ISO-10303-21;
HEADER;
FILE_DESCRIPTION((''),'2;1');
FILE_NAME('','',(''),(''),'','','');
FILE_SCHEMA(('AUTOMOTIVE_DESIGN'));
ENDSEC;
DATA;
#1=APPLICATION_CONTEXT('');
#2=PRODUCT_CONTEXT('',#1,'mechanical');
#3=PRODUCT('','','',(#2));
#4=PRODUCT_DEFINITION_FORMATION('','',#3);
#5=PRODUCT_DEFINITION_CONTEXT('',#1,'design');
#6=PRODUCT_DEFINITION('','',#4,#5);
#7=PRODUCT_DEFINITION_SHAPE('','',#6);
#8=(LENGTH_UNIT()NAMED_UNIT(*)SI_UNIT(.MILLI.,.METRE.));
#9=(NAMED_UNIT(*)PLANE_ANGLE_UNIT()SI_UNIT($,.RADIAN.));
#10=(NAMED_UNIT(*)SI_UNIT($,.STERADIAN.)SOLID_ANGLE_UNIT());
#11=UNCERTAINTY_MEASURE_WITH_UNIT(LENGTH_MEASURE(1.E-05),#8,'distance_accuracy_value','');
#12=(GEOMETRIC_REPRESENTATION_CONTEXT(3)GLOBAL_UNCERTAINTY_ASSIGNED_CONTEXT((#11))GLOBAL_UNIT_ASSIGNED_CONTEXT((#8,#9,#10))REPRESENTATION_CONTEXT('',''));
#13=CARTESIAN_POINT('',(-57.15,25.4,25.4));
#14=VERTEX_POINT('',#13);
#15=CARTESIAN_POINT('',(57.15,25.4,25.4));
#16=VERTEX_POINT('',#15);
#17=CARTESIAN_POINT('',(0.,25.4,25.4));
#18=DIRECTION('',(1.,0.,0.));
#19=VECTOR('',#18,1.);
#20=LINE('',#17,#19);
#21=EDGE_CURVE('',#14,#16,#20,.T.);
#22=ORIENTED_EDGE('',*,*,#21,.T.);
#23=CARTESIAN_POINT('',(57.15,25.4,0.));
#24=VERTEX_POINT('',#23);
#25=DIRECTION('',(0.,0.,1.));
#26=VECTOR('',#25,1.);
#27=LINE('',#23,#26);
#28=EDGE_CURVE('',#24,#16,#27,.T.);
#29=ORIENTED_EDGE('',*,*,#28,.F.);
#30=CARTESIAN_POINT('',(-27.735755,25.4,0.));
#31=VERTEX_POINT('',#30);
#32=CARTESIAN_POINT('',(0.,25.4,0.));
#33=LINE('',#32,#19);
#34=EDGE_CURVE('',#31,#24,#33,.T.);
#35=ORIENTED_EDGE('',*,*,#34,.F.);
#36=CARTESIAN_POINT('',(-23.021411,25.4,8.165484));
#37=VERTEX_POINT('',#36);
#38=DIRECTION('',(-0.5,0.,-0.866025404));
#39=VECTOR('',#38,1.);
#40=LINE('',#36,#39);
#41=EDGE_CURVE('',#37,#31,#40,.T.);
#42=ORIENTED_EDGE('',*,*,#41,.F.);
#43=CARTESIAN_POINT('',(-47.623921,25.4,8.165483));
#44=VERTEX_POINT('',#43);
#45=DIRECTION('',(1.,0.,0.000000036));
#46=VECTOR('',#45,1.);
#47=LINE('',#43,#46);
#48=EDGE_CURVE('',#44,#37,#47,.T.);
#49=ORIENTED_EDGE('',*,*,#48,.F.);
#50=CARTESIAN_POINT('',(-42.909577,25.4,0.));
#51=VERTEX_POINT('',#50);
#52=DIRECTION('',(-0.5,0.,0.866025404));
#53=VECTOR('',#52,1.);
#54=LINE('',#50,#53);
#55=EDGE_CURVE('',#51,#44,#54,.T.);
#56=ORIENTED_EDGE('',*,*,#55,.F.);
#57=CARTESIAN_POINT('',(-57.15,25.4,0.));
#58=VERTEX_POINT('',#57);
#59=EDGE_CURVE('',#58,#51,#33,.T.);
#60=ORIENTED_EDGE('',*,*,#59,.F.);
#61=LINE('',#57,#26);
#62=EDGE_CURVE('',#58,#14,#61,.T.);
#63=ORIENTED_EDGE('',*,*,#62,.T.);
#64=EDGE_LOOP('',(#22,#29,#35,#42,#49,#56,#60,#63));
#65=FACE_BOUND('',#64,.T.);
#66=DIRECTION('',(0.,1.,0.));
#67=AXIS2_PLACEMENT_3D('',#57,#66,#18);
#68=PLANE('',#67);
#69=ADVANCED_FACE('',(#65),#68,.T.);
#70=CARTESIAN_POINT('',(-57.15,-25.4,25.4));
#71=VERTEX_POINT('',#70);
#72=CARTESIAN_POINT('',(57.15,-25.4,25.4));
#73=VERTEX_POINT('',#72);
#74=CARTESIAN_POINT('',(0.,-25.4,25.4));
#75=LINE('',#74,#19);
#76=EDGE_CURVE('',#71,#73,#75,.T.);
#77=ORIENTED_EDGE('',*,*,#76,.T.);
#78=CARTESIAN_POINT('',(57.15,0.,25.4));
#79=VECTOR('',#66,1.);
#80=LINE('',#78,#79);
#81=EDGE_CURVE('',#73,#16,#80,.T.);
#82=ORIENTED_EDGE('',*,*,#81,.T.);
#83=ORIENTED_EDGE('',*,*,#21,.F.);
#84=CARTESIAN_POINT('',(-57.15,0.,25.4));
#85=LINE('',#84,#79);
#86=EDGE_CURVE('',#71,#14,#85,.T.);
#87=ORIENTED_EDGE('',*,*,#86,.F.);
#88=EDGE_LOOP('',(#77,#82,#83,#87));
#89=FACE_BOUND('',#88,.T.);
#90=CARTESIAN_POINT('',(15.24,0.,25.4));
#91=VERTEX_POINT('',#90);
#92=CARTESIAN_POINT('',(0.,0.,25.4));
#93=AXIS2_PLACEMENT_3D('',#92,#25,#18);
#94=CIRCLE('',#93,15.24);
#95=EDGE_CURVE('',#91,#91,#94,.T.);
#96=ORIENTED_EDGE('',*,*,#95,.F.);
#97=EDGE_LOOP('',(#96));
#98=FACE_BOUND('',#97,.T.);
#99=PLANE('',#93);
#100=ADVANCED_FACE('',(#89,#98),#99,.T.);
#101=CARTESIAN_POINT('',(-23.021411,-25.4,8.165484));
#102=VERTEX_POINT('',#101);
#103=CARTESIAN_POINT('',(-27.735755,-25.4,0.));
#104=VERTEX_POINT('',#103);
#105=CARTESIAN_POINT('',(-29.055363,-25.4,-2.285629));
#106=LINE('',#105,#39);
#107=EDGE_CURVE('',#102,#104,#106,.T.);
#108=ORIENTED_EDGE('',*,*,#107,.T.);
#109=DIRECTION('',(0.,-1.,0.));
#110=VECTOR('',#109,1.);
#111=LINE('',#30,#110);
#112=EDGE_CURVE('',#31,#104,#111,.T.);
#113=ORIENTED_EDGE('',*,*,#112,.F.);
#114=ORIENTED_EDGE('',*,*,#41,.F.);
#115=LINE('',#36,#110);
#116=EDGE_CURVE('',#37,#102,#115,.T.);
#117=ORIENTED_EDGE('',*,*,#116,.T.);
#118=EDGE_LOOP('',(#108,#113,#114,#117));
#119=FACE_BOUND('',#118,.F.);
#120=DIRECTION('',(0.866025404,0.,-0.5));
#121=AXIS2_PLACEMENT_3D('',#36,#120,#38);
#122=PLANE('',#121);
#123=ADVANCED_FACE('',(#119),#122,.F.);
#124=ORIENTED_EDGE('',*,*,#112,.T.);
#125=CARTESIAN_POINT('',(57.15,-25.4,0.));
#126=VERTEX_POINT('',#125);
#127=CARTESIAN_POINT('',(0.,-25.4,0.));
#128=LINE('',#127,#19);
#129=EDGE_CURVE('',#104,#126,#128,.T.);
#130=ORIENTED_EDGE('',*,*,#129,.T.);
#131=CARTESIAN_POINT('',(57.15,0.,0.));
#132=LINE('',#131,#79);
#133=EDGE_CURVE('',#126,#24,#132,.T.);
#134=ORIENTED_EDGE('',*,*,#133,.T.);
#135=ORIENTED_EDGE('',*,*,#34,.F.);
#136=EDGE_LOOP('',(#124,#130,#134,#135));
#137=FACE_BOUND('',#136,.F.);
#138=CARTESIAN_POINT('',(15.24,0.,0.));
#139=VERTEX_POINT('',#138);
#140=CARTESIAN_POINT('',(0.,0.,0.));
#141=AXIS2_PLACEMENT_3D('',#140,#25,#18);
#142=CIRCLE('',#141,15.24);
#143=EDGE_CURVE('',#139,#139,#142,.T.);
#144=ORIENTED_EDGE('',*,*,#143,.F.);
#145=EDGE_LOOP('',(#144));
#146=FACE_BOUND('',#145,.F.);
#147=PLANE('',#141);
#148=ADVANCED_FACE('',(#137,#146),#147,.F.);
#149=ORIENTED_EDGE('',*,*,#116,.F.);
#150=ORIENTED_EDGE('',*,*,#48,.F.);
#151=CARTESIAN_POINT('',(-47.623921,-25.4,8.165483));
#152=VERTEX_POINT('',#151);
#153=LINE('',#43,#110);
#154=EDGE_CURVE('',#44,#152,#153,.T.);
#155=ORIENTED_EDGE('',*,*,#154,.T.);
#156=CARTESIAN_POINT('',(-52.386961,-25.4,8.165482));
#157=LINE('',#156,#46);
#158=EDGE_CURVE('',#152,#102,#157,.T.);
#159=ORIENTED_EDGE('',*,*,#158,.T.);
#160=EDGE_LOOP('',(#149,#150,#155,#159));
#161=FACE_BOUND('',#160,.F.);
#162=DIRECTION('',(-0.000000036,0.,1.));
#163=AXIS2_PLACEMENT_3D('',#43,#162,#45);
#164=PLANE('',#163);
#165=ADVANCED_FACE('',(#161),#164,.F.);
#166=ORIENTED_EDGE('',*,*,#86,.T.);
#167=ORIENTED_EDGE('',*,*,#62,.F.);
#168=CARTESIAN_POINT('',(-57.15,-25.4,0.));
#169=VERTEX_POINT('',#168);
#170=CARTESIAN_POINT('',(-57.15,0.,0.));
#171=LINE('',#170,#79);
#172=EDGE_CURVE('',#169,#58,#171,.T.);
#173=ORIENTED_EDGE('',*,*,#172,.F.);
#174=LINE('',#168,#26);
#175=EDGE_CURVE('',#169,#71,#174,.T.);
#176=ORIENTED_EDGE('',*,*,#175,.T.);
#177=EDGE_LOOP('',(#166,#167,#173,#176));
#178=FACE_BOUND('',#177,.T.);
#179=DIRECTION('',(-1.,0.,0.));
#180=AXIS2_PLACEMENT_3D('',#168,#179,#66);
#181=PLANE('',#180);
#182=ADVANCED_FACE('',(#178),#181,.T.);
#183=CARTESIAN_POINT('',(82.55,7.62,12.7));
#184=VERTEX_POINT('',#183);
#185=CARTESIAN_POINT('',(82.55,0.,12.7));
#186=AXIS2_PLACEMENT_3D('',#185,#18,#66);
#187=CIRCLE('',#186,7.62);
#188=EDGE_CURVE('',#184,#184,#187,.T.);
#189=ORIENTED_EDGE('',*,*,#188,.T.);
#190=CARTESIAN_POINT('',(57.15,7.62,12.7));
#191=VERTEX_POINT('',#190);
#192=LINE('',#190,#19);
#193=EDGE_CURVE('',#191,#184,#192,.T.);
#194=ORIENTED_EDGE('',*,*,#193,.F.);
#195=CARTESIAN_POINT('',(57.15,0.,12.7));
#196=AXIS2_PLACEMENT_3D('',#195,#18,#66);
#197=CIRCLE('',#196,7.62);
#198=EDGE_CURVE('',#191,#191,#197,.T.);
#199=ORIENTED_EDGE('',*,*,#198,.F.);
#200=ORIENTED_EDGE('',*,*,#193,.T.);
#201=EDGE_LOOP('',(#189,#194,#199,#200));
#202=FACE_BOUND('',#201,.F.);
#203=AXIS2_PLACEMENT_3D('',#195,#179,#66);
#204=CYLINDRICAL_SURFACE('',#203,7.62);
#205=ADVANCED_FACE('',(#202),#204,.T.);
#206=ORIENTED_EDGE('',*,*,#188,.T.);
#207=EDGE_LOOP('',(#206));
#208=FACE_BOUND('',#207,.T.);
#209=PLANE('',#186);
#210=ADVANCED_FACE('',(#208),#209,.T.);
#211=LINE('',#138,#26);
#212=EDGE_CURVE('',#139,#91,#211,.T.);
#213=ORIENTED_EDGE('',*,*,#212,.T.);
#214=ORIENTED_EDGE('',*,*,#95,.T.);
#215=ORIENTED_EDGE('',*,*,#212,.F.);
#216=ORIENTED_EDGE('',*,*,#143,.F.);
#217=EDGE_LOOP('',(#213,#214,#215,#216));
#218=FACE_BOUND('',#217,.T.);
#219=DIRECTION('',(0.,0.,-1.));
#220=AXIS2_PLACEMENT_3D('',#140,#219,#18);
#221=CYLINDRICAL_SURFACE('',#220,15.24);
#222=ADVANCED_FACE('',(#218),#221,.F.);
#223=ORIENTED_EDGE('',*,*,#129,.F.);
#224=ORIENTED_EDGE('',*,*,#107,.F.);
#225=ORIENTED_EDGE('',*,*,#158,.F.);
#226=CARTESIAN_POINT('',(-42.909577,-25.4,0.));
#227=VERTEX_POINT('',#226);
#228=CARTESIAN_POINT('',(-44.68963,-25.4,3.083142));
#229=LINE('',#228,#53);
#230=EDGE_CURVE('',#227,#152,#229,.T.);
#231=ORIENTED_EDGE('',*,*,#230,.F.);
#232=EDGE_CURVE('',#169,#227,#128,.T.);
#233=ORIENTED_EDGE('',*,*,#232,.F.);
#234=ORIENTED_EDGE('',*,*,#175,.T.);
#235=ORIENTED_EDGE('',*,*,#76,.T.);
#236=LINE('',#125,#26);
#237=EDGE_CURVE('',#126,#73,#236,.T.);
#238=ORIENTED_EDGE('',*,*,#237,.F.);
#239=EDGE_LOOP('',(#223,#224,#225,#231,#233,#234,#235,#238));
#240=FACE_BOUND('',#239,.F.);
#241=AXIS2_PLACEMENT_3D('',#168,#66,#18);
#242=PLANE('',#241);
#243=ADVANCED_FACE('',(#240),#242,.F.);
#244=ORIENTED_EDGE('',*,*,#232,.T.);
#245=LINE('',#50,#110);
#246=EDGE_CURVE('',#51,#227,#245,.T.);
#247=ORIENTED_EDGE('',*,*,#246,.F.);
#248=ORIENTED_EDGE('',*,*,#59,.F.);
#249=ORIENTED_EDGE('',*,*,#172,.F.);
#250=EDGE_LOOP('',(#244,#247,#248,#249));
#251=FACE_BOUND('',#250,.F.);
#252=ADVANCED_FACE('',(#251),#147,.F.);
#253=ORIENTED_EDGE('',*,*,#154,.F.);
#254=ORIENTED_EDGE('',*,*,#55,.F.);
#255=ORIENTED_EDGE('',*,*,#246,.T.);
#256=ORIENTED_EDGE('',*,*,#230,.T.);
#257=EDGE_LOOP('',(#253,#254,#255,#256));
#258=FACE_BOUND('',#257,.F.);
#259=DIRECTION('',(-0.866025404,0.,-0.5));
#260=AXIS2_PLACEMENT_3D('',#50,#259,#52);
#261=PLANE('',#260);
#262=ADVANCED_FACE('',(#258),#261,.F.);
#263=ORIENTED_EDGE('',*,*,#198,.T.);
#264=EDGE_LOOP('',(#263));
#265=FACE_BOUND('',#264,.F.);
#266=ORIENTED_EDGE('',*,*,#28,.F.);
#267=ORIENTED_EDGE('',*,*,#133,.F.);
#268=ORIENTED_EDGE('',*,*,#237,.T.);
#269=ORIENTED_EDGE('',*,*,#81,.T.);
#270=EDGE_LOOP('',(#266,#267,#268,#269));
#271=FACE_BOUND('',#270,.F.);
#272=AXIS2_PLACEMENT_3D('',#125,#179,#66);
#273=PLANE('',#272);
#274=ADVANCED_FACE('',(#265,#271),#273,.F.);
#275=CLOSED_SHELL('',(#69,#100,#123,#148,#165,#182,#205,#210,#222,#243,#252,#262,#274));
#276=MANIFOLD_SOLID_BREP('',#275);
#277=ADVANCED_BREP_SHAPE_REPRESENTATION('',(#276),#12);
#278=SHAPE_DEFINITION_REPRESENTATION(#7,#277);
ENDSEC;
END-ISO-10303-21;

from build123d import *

# Parameters (mm, degrees)
F0_W     = 114.3
F0_H     = 50.8
F0_R     = 15.24
F1_DEPTH = 25.4
F4_DEPTH = 50.801
F5_R     = 7.62
F6_DEPTH = 25.4


# Not quite as in the source:
# - ends of sketch curves that miss each other by under 0.0002 mm in the source are joined


with BuildPart() as f1:
    # F0 (on Top) → F1 (new body)
    with BuildSketch(Plane.XY):
        Rectangle(F0_W, F0_H)
        Circle(F0_R, mode=Mode.SUBTRACT)
    extrude(amount=F1_DEPTH)

    # F3 (on face) → F4 (cut, through all)
    with BuildSketch(Plane(origin=(0, 25.4, 0), x_dir=(-1, 0, 0), z_dir=(0, 1, 0))):
        Polygon((27.7357548475, 0), (42.9095774889, 0), (47.6239210906, 8.1654826425), (23.0214107298, 8.1654835362), align=None)
    extrude(amount=-F4_DEPTH, mode=Mode.SUBTRACT)

    # F5 (on face) → F6 (join)
    with BuildSketch(Plane.YZ.offset(57.15)):
        with Locations((0, 12.7)):
            Circle(F5_R)
    extrude(amount=F6_DEPTH)


solid = f1.part
